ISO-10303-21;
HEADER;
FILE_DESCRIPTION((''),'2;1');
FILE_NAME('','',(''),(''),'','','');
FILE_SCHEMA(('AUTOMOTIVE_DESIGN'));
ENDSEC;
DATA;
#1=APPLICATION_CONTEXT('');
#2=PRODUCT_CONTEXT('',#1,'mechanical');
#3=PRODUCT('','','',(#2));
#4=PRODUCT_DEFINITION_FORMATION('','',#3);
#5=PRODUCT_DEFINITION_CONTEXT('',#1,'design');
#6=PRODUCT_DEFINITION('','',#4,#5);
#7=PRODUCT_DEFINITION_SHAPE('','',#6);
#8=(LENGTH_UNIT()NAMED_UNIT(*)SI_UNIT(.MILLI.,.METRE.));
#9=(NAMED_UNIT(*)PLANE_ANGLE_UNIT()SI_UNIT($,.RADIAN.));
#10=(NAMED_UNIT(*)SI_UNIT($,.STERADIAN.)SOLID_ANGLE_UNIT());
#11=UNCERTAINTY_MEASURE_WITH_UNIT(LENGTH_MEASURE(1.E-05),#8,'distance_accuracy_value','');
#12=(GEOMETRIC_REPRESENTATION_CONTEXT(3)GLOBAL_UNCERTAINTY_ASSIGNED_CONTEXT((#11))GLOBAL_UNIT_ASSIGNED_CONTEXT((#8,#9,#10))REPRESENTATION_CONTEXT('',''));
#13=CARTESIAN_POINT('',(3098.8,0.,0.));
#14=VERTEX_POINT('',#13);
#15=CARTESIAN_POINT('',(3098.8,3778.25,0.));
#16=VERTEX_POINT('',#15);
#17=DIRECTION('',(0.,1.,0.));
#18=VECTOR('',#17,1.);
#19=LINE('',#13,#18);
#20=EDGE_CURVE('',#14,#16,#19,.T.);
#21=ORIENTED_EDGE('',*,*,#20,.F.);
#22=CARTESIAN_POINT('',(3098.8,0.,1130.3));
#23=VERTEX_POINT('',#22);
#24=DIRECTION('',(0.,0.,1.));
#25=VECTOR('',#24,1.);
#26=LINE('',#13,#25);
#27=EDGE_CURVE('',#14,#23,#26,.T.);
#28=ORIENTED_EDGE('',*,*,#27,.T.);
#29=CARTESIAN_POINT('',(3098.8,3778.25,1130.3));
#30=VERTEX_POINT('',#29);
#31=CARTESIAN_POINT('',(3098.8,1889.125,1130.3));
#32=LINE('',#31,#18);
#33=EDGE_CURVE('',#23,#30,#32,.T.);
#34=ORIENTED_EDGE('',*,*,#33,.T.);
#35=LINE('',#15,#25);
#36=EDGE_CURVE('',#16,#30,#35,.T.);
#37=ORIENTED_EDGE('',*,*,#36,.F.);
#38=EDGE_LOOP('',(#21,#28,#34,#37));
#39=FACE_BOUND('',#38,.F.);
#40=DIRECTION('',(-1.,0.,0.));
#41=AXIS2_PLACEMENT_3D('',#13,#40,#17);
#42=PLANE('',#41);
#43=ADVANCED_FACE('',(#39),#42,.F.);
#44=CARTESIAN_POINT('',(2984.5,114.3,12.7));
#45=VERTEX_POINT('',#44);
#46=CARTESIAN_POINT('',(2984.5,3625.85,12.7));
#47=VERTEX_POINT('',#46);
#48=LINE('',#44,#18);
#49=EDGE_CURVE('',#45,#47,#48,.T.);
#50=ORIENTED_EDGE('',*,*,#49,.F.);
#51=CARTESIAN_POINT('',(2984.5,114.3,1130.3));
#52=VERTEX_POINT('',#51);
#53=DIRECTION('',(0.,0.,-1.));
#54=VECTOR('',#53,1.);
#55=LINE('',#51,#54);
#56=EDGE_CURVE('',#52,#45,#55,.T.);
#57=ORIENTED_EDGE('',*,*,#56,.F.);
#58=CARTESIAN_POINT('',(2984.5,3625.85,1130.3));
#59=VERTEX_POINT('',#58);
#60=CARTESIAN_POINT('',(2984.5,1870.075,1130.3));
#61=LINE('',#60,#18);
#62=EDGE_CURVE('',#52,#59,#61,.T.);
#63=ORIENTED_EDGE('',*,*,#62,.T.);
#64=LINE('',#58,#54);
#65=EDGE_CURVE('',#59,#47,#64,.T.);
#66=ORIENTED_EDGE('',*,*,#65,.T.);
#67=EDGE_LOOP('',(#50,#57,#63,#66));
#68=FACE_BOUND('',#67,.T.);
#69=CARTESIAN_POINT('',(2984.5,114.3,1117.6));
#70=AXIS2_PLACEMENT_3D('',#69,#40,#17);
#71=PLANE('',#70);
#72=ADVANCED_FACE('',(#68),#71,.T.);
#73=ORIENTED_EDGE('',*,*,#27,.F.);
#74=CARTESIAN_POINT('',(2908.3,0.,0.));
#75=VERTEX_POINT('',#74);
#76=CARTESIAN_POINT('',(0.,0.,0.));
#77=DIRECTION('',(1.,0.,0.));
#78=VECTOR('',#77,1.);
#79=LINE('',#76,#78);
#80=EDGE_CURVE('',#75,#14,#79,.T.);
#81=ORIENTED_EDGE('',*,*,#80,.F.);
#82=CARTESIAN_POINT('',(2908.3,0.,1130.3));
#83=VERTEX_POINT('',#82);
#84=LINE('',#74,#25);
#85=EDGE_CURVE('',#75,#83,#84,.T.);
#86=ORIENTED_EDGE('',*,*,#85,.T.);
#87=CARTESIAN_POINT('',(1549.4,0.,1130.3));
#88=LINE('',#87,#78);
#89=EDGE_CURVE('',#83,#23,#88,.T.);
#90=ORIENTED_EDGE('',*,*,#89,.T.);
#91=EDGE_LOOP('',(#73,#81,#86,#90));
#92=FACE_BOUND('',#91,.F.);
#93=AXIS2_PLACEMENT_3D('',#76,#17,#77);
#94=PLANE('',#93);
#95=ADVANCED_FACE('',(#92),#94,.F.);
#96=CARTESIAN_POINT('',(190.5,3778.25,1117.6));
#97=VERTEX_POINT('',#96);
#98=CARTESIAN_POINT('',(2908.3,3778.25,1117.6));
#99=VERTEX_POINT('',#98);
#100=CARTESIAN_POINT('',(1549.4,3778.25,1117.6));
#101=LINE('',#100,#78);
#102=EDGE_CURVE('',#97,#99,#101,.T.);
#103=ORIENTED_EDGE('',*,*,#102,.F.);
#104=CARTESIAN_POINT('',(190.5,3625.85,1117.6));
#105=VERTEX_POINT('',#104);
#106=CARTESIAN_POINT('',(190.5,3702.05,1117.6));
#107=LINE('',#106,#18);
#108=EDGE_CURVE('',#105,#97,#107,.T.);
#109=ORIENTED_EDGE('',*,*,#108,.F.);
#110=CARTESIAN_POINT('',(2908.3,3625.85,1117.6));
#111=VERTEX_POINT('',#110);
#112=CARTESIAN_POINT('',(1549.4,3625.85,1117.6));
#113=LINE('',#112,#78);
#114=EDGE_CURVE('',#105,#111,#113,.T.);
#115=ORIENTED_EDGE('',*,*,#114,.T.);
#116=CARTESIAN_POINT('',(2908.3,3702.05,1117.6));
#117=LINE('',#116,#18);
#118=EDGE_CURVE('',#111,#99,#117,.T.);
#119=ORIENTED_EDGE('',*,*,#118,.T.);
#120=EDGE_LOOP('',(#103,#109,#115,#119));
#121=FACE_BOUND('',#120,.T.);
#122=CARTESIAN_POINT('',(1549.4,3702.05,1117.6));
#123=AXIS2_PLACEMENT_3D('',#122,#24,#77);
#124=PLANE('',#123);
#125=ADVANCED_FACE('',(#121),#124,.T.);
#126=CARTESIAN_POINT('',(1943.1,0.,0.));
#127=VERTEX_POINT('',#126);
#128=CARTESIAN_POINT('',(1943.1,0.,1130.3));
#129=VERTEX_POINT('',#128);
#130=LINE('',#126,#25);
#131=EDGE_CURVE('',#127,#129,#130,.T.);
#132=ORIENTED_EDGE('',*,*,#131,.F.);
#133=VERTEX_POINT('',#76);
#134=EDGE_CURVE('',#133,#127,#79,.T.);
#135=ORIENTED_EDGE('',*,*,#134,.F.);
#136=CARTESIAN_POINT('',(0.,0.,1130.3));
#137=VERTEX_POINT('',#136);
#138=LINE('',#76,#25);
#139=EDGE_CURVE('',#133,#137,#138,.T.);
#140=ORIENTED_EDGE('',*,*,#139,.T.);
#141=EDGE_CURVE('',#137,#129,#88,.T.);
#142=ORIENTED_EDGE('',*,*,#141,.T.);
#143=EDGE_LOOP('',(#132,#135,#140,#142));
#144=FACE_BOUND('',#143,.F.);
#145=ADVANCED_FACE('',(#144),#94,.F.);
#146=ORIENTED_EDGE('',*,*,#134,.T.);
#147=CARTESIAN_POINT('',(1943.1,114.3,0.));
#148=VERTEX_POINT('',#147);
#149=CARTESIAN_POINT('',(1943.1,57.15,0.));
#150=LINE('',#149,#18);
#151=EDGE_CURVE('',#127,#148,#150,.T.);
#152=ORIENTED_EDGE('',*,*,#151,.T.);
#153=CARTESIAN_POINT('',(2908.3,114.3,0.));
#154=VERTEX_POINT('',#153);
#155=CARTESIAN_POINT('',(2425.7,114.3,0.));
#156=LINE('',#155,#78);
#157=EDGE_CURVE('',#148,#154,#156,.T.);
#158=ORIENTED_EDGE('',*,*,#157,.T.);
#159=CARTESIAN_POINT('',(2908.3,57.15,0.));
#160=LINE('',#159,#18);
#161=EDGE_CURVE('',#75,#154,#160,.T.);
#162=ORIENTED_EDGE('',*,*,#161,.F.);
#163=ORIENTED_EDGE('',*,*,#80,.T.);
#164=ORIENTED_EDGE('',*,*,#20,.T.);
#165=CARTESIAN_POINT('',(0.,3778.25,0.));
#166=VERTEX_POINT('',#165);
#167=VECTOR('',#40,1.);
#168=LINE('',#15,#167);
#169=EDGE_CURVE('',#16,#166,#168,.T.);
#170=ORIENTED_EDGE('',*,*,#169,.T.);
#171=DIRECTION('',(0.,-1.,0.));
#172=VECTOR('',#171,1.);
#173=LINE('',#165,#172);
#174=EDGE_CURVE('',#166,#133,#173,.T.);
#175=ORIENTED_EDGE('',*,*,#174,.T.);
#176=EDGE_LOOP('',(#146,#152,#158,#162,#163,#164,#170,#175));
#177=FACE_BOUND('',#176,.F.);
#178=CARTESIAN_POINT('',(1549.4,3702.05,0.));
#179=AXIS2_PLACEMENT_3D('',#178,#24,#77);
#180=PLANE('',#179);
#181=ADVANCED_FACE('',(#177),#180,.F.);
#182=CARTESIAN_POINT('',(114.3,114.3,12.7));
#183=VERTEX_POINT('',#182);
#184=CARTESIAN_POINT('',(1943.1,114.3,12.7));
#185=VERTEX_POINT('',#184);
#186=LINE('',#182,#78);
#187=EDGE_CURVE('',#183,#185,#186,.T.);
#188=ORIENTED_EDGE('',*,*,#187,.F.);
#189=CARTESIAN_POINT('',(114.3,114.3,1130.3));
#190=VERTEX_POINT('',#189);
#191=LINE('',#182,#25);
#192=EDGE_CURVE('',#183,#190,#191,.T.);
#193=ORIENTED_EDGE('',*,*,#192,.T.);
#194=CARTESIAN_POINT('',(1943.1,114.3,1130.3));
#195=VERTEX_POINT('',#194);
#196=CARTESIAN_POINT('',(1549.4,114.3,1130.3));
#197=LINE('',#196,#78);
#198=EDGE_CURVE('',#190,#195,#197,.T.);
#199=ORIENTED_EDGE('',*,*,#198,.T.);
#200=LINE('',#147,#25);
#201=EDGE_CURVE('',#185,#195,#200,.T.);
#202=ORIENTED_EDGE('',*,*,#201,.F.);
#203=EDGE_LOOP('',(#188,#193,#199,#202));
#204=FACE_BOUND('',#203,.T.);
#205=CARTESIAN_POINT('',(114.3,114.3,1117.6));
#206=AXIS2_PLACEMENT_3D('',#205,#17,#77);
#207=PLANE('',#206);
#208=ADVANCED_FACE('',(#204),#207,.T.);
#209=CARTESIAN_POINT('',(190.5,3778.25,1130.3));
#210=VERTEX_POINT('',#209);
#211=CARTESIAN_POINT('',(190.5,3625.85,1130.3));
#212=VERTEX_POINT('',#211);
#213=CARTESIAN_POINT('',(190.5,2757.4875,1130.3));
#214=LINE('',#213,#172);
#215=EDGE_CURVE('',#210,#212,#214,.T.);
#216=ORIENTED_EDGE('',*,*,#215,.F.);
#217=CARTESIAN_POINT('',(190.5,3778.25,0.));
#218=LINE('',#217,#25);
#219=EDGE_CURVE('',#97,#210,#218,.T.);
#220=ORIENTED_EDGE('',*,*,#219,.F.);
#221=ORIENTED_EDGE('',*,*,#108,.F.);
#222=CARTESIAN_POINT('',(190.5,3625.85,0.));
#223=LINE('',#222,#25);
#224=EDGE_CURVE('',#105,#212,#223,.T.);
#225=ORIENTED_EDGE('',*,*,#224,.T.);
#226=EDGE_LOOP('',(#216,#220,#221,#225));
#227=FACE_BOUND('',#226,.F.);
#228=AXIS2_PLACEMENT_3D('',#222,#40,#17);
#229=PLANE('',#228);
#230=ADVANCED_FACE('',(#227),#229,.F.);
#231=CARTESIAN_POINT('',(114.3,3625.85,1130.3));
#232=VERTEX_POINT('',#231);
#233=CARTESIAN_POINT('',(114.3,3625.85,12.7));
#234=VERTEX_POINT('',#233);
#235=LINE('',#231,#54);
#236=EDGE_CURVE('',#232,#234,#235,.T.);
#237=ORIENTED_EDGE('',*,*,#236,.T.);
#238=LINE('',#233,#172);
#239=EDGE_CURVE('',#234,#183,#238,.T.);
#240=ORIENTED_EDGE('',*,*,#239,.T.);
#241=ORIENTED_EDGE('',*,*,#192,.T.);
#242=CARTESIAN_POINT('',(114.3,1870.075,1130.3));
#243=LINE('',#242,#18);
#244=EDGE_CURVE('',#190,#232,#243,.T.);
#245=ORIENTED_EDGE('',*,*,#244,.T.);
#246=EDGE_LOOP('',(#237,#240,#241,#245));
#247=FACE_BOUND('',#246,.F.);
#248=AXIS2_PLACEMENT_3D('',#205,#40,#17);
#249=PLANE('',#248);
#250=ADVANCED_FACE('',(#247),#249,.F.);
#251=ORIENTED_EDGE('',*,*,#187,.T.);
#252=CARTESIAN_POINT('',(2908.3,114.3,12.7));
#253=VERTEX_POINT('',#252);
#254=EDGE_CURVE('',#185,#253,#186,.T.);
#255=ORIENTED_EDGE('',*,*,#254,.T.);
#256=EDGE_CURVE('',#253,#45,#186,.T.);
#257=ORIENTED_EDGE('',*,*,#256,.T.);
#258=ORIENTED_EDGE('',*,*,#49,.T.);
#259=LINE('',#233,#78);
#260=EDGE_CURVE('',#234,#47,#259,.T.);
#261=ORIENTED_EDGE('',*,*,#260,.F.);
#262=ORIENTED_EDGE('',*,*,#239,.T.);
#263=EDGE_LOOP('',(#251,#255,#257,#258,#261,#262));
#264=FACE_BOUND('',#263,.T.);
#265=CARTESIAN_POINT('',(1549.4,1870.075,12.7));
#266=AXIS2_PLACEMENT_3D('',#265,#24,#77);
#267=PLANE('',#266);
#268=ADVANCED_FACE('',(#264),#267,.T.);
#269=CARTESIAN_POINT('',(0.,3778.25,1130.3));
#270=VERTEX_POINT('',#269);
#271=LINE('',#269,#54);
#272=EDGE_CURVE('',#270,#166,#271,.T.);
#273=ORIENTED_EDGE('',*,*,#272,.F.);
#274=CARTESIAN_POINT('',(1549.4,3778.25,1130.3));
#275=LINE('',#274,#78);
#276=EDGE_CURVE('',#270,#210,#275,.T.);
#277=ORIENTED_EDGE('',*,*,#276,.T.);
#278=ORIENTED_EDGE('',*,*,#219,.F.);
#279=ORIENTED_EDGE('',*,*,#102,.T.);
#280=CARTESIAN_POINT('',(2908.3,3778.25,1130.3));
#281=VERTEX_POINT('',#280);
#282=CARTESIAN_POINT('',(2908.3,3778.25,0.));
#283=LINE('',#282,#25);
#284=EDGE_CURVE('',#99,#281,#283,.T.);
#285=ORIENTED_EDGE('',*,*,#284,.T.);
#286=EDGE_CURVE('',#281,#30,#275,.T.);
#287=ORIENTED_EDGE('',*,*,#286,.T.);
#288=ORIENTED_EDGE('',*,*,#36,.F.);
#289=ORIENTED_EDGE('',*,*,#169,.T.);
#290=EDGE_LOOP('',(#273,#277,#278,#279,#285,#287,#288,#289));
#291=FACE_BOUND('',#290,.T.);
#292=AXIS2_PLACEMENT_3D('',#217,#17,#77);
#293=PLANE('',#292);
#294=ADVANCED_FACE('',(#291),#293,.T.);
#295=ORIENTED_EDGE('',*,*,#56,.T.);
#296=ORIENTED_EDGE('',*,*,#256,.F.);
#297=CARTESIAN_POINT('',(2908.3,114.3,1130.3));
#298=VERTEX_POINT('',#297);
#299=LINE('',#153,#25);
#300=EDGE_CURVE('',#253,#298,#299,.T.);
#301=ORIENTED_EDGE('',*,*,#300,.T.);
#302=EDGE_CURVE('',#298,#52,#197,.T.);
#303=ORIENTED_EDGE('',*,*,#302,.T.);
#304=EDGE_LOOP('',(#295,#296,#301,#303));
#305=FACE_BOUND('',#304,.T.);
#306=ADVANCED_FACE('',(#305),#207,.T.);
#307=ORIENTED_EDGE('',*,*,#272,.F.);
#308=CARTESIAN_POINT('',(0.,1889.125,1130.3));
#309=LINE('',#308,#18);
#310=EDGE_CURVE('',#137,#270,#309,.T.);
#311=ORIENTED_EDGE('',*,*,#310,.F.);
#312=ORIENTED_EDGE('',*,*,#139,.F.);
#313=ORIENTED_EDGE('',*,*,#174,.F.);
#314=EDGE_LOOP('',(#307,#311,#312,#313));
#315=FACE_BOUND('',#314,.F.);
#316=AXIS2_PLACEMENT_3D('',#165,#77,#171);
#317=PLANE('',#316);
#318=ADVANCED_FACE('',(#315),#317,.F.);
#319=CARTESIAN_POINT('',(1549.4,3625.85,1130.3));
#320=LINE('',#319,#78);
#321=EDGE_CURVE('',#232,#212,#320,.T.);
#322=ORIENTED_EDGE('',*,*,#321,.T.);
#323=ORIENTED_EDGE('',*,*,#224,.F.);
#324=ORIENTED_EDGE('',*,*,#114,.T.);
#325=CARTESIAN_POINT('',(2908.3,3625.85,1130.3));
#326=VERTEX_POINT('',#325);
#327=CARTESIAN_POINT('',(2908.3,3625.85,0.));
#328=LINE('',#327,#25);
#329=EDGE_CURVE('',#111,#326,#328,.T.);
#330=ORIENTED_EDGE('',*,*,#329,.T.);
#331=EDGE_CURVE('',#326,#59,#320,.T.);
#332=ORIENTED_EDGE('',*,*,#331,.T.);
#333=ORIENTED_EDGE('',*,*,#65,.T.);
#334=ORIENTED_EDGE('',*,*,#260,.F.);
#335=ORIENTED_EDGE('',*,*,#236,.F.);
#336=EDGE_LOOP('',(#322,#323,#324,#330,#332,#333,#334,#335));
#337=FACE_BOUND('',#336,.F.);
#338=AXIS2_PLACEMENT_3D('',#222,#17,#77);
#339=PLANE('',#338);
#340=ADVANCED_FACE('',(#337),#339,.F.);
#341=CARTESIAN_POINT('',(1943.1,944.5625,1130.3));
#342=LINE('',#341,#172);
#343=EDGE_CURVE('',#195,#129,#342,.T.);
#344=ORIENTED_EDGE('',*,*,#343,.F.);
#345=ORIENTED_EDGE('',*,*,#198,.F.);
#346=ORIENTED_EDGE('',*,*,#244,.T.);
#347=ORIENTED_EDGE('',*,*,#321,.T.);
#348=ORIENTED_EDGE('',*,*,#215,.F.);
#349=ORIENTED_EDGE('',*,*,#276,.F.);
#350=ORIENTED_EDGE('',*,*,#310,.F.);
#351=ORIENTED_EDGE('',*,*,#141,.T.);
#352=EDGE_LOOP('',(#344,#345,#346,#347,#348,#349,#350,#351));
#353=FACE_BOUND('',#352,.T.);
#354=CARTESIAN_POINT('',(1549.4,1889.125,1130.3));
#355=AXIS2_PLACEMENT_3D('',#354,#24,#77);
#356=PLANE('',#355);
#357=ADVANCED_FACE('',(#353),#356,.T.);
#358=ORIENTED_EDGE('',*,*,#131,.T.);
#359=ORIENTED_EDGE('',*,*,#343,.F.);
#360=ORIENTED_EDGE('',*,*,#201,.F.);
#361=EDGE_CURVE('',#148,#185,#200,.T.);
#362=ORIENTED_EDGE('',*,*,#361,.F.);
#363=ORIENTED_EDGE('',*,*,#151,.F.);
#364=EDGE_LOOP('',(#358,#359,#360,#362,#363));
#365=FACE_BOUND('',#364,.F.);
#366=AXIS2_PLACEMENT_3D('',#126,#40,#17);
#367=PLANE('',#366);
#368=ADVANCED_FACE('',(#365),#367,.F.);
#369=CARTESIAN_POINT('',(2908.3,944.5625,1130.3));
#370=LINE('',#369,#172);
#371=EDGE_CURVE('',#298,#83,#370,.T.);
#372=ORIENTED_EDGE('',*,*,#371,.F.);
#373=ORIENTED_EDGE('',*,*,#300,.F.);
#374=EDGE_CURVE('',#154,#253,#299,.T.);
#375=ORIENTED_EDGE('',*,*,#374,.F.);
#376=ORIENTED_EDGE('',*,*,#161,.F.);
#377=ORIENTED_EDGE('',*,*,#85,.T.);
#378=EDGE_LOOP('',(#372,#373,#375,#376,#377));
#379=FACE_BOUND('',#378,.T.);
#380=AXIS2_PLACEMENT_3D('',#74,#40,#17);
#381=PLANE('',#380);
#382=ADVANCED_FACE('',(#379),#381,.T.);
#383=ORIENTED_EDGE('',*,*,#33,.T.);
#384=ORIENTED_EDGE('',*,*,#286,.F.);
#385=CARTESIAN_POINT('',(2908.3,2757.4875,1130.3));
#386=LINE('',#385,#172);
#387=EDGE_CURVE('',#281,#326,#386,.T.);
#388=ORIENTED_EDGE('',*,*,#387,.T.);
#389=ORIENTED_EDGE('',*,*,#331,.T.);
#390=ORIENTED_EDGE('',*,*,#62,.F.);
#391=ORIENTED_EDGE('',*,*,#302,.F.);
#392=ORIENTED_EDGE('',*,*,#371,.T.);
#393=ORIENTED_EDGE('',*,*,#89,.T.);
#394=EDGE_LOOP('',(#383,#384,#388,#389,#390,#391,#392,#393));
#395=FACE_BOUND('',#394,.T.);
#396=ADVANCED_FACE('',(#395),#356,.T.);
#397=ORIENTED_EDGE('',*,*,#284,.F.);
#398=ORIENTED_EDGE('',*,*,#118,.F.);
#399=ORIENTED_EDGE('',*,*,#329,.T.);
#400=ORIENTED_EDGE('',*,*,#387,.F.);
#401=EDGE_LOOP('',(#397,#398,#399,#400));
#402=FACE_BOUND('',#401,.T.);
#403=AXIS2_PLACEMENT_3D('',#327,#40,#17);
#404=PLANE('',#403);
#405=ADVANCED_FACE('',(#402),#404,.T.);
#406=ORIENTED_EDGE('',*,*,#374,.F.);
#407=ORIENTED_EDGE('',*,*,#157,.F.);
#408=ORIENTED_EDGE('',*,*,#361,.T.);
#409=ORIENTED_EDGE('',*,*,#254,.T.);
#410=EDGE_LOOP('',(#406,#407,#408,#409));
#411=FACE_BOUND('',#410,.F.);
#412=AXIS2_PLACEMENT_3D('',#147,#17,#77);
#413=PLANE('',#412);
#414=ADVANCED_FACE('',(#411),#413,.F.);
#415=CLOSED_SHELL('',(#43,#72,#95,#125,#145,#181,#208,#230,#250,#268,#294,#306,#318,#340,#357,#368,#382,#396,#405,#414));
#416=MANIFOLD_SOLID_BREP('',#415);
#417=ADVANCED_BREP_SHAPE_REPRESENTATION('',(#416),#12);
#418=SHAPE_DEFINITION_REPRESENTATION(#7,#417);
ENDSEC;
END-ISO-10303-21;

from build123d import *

# Parameters (mm, degrees)
F0_W        = 2717.8
F0_H        = 152.4000000021
F0_W_2      = 965.2
F0_H_2      = 114.3
F1_DEPTH    = 1117.6
F1_FACE_W   = 3098.8
F1_FACE_H   = 3778.2500000021
F1_FACE_W_2 = 2870.2
F1_FACE_H_2 = 3511.55
F2_DEPTH    = 12.7
F3_DEPTH    = 2387.6
F4_DEPTH    = 1117.6
F5_DEPTH    = 2159


# Not quite as in the source:
# - a feature names something its author has since deleted; it is built from what else it names


with BuildPart() as f1:
    # F0 (on Top) → F1 (new body)
    with BuildSketch(Plane.XY):
        Polygon((190.5, 3778.2500000021), (0, 3778.2500000021), (0, 0), (1943.1, 0), (1943.1, 114.3), (114.3, 114.3), (114.3, 3625.85), (190.5, 3625.85), align=None)
        with Locations((1549.4, 3702.050000001)):
            Rectangle(F0_W, F0_H)
        Polygon((3098.8, 3778.2500000021), (2908.3, 3778.2500000021), (2908.3, 3625.85), (2984.5, 3625.85), (2984.5, 114.3), (2908.3, 114.3), (2908.3, 0), (3098.8, 0), align=None)
        with Locations((2425.7, 57.15)):
            Rectangle(F0_W_2, F0_H_2)
    extrude(amount=F1_DEPTH)

    # F0 (on Top) + F1_face (on face) → F2 (join)
    with BuildSketch(Plane.XY):
        Polygon((2908.3, 3625.85), (190.5, 3625.85), (114.3, 3625.85), (114.3, 114.3), (1943.1, 114.3), (2908.3, 114.3), (2984.5, 114.3), (2984.5, 3625.85), align=None)
    with BuildSketch(Plane(origin=(1549.4, 2006.9762474082, 1117.6), x_dir=(1, 0, 0), z_dir=(0, 0, 1))):
        with Locations((0, -117.8512474072)):
            Rectangle(F1_FACE_W, F1_FACE_H)
        with Locations((0, -136.9012474082)):
            Rectangle(F1_FACE_W_2, F1_FACE_H_2, mode=Mode.SUBTRACT)
    extrude(amount=F2_DEPTH)

    # F0 (on Top) → F3 (cut)
    with BuildSketch(Plane.XY):
        with Locations((1549.4, 3702.050000001)):
            Rectangle(F0_W, F0_H)
    extrude(amount=F3_DEPTH, mode=Mode.SUBTRACT)

    # F0 (on Top) → F4 (join)
    with BuildSketch(Plane.XY):
        with Locations((1549.4, 3702.050000001)):
            Rectangle(F0_W, F0_H)
    extrude(amount=F4_DEPTH)

    # F0 (on Top) → F5 (cut)
    with BuildSketch(Plane.XY):
        with Locations((2425.7, 57.15)):
            Rectangle(F0_W_2, F0_H_2)
    extrude(amount=F5_DEPTH, mode=Mode.SUBTRACT)


solid = f1.part
